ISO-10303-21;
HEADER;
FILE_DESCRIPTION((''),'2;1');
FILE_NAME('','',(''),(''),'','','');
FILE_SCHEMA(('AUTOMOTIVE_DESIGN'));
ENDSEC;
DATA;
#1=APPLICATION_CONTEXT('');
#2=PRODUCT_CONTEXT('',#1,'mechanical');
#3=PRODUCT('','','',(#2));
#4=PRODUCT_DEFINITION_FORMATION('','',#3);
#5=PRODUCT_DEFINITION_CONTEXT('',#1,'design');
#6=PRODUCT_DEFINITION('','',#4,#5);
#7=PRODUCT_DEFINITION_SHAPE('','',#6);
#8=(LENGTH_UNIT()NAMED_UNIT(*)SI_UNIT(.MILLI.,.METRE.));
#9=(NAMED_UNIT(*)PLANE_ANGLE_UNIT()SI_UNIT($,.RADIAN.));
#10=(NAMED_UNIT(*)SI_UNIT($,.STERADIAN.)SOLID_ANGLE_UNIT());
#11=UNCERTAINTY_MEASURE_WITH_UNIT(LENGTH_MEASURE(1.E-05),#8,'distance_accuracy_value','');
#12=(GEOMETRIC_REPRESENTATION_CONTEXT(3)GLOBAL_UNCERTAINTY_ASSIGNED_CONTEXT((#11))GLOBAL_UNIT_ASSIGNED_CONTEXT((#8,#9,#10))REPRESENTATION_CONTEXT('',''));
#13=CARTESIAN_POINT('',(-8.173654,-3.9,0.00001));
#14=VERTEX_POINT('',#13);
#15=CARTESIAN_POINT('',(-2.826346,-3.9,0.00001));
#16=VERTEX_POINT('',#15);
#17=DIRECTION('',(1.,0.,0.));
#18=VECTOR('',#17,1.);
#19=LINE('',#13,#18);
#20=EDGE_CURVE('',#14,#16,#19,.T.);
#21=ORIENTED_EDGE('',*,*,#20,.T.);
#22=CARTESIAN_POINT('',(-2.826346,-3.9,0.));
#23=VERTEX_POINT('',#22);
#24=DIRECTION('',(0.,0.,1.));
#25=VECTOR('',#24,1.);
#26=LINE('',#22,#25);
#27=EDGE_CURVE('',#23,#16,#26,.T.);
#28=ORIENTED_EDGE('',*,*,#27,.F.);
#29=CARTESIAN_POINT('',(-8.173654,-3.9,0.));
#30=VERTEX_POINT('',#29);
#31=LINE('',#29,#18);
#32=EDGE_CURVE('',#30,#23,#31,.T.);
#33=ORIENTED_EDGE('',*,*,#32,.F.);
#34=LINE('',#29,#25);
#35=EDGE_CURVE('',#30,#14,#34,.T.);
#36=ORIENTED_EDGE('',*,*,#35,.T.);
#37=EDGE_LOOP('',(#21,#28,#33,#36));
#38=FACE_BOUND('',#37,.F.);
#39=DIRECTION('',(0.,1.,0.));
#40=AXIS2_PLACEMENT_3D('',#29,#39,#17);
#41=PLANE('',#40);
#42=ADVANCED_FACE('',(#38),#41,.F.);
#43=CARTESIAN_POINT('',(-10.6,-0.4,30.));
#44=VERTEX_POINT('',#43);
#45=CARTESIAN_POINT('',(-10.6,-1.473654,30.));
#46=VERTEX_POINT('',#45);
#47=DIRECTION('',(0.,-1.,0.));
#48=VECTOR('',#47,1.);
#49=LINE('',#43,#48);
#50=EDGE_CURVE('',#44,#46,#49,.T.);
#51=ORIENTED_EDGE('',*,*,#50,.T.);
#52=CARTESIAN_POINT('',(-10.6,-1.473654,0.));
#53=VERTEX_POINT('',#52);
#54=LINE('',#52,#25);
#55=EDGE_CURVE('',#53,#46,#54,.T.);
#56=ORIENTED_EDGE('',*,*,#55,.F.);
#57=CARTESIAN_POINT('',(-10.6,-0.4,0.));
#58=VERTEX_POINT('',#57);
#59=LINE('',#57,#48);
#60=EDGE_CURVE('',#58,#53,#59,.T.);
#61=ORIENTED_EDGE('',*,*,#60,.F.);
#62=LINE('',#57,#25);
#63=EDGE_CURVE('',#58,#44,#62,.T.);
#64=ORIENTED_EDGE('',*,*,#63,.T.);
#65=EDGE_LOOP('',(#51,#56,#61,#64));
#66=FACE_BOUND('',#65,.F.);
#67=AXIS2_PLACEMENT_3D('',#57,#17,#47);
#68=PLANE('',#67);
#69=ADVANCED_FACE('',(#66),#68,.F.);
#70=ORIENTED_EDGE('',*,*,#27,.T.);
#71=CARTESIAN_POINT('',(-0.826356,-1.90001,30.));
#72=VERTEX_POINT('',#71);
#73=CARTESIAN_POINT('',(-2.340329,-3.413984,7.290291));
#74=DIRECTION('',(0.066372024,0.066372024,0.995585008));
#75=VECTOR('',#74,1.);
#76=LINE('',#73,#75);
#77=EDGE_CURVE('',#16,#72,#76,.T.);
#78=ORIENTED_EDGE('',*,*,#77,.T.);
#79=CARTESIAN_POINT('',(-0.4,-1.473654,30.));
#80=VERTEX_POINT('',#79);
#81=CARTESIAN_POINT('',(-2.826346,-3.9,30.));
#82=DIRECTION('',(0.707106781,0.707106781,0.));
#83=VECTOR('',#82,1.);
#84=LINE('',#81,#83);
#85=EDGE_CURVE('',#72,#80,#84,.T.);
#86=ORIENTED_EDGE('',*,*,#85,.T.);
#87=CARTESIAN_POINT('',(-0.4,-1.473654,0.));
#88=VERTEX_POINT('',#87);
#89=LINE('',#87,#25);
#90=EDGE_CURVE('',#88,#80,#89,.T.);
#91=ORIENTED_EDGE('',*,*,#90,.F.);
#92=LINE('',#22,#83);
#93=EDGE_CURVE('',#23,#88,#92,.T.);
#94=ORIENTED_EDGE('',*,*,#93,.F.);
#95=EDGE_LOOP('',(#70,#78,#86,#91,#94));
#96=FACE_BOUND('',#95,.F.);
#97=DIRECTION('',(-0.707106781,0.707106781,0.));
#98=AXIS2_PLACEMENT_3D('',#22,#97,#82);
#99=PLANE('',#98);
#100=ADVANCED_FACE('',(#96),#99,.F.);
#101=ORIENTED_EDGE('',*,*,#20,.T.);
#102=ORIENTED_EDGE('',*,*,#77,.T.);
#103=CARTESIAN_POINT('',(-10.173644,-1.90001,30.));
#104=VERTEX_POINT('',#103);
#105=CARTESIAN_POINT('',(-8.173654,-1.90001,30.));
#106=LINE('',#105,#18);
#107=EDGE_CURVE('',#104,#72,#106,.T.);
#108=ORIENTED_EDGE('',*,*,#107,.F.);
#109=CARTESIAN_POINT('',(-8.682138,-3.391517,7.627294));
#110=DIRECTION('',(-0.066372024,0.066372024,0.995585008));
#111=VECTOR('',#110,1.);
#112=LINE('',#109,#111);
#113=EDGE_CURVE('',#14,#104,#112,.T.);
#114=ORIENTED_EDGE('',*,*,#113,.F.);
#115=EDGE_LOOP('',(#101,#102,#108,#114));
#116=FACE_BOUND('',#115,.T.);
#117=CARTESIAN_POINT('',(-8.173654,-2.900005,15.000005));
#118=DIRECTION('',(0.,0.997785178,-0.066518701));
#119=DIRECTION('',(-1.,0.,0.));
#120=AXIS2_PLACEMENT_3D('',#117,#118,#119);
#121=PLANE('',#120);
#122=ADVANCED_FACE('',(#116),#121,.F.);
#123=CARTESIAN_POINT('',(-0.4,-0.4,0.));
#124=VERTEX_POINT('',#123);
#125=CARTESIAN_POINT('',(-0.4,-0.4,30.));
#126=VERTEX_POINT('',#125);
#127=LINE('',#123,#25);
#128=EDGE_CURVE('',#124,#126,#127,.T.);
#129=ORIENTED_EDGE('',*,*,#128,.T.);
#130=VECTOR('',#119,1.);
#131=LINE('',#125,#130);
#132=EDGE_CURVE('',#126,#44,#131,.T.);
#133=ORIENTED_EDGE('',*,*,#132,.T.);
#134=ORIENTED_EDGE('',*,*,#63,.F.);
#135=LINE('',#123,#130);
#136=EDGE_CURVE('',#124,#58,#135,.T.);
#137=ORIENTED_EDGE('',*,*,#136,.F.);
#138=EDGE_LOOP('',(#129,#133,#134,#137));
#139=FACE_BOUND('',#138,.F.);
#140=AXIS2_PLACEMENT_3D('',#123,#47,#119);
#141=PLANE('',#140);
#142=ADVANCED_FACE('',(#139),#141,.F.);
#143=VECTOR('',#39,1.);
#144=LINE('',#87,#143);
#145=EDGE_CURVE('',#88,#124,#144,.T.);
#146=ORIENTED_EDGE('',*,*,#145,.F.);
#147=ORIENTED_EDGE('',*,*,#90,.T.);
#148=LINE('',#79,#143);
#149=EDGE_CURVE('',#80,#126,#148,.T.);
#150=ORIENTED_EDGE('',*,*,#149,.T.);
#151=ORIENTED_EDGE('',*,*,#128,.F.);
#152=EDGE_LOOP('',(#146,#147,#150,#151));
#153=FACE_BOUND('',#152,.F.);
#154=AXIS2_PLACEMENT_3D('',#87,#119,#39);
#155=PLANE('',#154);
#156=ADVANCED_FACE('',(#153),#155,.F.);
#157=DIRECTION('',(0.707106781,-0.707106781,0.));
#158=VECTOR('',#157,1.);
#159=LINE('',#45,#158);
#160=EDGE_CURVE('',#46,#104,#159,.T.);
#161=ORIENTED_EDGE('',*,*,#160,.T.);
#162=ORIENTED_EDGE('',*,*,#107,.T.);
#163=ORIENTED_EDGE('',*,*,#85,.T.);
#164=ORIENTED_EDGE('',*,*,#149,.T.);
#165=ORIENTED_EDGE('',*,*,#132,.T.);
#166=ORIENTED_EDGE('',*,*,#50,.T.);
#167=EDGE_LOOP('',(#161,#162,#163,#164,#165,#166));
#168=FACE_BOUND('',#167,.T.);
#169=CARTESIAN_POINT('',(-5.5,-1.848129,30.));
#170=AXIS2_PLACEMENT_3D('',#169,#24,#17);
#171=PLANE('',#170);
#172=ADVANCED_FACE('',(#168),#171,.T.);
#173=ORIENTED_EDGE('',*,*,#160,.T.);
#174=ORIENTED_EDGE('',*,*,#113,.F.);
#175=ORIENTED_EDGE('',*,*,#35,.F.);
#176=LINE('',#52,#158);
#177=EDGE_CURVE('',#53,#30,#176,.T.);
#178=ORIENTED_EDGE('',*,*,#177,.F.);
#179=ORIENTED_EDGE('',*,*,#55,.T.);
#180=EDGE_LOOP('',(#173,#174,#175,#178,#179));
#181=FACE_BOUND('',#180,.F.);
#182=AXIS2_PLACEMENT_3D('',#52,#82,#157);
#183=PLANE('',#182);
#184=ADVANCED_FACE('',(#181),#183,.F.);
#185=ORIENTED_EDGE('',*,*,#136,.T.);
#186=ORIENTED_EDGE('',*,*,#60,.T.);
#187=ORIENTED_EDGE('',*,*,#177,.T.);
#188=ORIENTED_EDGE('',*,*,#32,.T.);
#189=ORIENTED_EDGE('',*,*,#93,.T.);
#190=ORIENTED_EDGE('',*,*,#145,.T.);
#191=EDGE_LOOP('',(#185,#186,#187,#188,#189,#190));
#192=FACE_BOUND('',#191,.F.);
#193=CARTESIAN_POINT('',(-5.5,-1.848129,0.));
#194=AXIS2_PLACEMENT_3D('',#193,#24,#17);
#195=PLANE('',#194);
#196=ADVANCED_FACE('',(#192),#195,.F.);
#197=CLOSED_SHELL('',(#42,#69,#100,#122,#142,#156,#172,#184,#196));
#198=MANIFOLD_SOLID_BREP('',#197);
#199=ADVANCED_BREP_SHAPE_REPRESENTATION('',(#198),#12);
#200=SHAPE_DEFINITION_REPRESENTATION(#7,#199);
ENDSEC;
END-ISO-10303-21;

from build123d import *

# Parameters (mm, degrees)
F1_DEPTH = 30
F2_SIZE2 = 1.99999
F2_SIZE  = 29.99999


# Not quite as in the source:
# - a fillet or chamfer is up to 0.001 mm smaller than in the source, because OpenCascade refuses the exact size


with BuildPart() as f1:
    # F0 (on Top) → F1 (new body)
    with BuildSketch(Plane.XY):
        Polygon((-10.6, -0.4), (-10.6, -1.4736544004), (-8.1736544004, -3.9), (-2.8263455996, -3.9), (-0.4, -1.4736544004), (-0.4, -0.4), align=None)
    extrude(amount=F1_DEPTH)

    # F2 (size 30 and 2 in the source; OpenCascade refuses exactly that, so slightly less here)
    f2_edges = [f1.edges().sort_by_distance(p)[0] for p in [
        (-5.5, -3.9, 30),
    ]]
    f2_side = f1.faces().sort_by_distance((-5.5, -3.9, 15))[0]
    chamfer(f2_edges, length=F2_SIZE, length2=F2_SIZE2, reference=f2_side)


solid = f1.part
